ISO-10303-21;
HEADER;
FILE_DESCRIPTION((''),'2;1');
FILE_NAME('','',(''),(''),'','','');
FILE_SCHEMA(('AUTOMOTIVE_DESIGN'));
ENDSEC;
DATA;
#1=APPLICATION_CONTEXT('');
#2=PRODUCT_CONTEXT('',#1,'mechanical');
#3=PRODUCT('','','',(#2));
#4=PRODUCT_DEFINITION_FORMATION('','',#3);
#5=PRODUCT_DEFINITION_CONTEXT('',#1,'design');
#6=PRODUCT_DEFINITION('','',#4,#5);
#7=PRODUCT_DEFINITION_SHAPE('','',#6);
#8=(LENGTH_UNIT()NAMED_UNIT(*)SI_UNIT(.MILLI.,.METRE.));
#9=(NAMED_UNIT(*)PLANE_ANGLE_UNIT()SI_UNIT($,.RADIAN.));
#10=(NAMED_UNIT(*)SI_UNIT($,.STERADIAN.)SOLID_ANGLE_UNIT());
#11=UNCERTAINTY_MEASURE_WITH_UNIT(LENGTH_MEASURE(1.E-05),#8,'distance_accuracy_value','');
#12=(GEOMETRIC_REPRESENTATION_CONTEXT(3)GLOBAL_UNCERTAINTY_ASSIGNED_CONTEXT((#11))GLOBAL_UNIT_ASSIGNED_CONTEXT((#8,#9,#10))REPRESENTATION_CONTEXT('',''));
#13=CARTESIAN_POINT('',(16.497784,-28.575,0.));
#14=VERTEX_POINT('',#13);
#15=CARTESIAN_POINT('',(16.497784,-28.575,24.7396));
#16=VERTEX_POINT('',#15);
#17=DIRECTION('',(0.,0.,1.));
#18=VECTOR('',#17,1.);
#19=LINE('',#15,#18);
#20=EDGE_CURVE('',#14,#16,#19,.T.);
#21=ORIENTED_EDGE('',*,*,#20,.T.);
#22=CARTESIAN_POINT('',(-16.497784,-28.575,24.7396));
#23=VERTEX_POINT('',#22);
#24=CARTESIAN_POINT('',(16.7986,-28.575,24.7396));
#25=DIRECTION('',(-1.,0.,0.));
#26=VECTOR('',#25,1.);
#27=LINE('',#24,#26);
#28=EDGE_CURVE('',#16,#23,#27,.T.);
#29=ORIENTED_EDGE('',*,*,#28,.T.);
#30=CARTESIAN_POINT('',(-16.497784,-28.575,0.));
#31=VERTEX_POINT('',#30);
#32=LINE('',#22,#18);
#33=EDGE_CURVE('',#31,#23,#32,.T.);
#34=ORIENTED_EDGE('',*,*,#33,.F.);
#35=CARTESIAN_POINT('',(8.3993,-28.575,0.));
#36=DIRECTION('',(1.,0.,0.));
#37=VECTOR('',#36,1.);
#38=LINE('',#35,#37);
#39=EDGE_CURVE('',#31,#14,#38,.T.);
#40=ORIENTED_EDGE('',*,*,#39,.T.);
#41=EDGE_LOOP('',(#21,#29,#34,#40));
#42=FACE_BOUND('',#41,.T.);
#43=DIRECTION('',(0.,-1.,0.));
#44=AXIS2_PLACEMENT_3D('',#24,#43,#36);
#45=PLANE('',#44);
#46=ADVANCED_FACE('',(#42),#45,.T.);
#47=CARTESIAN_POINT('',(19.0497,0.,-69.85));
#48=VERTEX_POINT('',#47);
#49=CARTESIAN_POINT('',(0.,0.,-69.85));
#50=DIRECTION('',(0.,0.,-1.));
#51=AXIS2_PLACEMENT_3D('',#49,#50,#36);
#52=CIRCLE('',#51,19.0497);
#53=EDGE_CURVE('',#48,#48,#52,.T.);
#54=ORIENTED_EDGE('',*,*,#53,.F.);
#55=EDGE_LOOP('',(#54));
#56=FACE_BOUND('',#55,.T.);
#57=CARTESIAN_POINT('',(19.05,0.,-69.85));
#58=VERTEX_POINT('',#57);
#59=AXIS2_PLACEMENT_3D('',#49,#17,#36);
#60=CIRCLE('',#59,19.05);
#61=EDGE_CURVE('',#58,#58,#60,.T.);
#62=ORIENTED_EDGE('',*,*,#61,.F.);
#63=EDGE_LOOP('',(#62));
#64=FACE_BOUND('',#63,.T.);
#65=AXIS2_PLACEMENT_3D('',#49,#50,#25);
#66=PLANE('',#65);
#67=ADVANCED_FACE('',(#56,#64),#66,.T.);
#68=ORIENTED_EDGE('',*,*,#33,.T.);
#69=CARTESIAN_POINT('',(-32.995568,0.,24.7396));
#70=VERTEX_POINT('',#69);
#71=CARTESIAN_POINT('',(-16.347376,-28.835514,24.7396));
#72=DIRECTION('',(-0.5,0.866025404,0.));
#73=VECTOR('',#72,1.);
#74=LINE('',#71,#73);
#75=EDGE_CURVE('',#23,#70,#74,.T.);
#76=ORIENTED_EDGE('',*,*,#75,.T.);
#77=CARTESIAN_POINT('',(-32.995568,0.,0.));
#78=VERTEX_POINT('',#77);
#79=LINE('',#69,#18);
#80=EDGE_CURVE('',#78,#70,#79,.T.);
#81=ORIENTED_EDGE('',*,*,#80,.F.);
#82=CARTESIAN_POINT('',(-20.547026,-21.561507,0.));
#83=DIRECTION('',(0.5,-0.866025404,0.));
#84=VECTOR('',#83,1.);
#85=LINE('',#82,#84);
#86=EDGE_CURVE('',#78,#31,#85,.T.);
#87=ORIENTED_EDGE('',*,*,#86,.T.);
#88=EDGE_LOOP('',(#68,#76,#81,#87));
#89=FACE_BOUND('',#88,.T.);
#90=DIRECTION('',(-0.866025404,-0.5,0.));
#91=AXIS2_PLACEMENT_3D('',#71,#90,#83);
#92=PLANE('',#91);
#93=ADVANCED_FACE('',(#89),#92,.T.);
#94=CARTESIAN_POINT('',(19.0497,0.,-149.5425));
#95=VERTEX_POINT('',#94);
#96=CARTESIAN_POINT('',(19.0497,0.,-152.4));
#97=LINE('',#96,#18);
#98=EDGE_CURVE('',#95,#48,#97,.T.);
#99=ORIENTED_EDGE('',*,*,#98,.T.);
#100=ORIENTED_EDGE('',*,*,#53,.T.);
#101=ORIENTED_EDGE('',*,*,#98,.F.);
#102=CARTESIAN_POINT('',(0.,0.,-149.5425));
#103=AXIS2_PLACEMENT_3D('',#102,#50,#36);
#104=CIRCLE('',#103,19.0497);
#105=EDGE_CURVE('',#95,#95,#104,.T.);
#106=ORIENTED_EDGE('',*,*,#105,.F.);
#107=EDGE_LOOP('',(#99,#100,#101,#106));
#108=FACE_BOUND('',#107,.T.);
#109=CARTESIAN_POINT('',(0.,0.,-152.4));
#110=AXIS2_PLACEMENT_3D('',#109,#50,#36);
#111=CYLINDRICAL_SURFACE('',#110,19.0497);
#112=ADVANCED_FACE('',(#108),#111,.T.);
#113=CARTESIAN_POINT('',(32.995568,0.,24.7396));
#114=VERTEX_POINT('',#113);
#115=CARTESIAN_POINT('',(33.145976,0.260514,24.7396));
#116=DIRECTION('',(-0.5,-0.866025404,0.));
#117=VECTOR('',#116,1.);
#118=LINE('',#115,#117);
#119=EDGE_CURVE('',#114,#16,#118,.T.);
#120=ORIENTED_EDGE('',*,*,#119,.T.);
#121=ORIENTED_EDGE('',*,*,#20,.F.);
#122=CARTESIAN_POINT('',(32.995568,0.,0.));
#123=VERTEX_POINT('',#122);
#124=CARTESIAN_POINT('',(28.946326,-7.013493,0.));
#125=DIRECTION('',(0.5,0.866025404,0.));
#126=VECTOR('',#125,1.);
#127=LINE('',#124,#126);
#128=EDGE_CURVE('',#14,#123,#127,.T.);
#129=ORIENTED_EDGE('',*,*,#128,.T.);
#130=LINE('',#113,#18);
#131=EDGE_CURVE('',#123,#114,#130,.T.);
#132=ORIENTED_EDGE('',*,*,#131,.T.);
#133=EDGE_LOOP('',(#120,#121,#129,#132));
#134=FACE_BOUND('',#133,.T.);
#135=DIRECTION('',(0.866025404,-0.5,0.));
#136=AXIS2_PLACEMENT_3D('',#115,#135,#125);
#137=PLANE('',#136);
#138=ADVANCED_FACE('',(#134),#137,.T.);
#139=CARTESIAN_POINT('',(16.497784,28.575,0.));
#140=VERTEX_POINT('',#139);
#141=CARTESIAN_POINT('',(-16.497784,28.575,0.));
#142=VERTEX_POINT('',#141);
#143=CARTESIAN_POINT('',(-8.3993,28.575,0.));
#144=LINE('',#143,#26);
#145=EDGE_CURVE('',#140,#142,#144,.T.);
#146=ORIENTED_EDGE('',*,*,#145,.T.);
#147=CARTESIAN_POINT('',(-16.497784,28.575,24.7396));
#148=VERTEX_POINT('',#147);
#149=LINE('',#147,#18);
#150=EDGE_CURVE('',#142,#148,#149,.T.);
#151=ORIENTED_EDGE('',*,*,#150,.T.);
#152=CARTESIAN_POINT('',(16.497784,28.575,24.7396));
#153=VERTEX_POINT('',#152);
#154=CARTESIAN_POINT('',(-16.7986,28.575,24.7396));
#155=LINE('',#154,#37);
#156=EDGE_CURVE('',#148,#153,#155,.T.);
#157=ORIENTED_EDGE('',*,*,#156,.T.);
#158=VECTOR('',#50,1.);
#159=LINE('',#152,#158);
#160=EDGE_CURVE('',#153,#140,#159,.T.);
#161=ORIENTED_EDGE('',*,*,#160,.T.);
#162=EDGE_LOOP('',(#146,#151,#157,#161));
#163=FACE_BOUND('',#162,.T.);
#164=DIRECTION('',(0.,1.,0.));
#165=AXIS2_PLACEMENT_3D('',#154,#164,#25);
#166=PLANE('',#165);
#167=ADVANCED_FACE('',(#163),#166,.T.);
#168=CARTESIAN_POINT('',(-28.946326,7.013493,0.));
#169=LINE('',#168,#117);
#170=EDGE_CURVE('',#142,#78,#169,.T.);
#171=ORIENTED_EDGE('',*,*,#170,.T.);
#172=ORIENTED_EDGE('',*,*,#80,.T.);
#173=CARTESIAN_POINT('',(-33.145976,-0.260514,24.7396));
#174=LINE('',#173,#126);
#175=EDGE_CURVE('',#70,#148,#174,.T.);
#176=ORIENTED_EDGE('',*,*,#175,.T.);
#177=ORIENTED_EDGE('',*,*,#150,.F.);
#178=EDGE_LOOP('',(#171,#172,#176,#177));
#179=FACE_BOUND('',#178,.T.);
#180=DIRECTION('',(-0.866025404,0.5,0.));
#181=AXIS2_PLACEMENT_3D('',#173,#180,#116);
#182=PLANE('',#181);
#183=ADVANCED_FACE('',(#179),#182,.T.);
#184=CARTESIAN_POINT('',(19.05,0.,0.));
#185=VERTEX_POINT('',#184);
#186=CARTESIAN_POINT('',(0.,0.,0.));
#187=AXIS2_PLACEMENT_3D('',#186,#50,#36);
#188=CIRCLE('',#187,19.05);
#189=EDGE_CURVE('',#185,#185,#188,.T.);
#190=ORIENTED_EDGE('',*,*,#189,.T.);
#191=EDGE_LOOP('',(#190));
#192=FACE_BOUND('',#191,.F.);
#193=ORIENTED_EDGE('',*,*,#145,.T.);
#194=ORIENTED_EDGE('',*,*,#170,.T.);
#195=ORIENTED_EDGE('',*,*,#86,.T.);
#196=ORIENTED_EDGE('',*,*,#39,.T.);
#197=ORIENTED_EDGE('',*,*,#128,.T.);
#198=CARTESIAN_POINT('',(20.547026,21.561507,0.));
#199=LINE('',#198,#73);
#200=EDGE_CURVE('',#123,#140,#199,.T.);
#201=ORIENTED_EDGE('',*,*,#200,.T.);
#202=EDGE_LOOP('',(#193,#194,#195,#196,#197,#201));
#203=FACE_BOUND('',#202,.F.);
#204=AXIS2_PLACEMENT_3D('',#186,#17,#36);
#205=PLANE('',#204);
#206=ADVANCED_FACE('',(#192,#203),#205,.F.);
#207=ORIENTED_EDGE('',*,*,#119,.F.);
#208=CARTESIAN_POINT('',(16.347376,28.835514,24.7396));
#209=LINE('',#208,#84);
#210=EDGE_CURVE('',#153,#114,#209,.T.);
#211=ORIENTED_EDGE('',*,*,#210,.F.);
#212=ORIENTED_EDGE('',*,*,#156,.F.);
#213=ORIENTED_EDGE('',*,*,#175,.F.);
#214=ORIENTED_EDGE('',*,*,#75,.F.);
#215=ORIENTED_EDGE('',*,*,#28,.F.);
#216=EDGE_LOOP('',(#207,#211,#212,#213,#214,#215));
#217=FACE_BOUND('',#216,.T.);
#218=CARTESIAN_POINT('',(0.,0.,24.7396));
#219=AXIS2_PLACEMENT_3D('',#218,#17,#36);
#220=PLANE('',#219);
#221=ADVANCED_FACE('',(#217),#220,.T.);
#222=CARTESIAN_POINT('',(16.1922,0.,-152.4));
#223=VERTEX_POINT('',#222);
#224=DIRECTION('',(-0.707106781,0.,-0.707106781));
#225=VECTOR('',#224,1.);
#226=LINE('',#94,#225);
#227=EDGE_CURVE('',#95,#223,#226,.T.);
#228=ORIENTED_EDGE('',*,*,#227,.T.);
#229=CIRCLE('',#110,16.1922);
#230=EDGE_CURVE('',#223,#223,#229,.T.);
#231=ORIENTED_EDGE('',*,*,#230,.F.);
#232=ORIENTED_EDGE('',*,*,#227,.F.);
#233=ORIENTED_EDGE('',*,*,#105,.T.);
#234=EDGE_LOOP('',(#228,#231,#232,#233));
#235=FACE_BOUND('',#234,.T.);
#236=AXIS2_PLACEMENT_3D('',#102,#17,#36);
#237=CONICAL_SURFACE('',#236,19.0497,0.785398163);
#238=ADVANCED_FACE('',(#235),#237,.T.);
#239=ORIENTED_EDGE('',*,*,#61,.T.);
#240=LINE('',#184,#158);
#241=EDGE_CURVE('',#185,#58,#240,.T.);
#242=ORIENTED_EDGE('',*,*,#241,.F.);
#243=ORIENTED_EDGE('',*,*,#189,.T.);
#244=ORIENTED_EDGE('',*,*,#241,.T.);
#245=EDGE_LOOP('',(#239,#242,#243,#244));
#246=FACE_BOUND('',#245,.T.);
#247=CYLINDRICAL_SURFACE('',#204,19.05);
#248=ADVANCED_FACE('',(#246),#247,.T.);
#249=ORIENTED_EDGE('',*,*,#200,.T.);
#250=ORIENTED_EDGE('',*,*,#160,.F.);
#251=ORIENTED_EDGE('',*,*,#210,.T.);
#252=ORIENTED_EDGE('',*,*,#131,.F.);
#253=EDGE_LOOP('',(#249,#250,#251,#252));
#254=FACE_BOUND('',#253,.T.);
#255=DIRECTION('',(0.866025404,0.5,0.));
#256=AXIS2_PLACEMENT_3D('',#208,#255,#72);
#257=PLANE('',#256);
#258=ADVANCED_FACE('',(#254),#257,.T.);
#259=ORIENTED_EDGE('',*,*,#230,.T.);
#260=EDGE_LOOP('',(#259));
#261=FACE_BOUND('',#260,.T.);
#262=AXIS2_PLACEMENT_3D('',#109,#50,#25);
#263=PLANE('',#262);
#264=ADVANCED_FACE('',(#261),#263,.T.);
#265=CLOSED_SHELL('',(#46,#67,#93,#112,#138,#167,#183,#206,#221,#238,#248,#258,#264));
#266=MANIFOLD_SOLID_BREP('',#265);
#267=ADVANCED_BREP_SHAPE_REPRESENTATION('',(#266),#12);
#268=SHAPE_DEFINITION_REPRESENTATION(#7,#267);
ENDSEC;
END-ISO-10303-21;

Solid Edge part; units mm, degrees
sketch "Sketch1" plane through (0, 0, 0) normal (0, 0, 1) x (1, 0, 0)
  circle A0 centre (0, 0) radius 33.147
  dimension "D1" = 66.294
extrude "Protrusion1" add sketch "Sketch1" along normal blind 24.7396
sketch "Sketch2" plane through (0, 0, 0) normal (0, 0, -1) x (1, 0, 0)
  circle A0 centre (0, 0) radius 19.05
extrude "Protrusion2" add sketch "Sketch2" along normal blind 152.4
sketch "Sketch3" plane through (0, 0, -152.4) normal (0, 0, -1) x (1, 0, 0)
  circle A0 centre (0, 0) radius 19.0497
extrude "Cutout1" cut sketch "Sketch3" against normal blind 82.55 flip side to cut
chamfer "Chamfer_1" distance 2.8575 angle 45 1 edges at (-19.0497, 0, -152.4)
sketch "Sketch4" plane through (0, 0, 24.7396) normal (0, 0, 1) x (1, 0, 0)
  line L0 (-16.7986, 28.575) -> (16.7986, 28.575)
  dimension "D1" = 57.15
extrude "Cutout2" cut sketch "Sketch4" against normal up to next material side at (0, 28.625, 24.7396)
pattern_circular "Pattern1" count 6 over 360 about axis through (0, 0, 24.7396) along (0, 0, 1) of "Cutout2"
properties part number "24106972"
